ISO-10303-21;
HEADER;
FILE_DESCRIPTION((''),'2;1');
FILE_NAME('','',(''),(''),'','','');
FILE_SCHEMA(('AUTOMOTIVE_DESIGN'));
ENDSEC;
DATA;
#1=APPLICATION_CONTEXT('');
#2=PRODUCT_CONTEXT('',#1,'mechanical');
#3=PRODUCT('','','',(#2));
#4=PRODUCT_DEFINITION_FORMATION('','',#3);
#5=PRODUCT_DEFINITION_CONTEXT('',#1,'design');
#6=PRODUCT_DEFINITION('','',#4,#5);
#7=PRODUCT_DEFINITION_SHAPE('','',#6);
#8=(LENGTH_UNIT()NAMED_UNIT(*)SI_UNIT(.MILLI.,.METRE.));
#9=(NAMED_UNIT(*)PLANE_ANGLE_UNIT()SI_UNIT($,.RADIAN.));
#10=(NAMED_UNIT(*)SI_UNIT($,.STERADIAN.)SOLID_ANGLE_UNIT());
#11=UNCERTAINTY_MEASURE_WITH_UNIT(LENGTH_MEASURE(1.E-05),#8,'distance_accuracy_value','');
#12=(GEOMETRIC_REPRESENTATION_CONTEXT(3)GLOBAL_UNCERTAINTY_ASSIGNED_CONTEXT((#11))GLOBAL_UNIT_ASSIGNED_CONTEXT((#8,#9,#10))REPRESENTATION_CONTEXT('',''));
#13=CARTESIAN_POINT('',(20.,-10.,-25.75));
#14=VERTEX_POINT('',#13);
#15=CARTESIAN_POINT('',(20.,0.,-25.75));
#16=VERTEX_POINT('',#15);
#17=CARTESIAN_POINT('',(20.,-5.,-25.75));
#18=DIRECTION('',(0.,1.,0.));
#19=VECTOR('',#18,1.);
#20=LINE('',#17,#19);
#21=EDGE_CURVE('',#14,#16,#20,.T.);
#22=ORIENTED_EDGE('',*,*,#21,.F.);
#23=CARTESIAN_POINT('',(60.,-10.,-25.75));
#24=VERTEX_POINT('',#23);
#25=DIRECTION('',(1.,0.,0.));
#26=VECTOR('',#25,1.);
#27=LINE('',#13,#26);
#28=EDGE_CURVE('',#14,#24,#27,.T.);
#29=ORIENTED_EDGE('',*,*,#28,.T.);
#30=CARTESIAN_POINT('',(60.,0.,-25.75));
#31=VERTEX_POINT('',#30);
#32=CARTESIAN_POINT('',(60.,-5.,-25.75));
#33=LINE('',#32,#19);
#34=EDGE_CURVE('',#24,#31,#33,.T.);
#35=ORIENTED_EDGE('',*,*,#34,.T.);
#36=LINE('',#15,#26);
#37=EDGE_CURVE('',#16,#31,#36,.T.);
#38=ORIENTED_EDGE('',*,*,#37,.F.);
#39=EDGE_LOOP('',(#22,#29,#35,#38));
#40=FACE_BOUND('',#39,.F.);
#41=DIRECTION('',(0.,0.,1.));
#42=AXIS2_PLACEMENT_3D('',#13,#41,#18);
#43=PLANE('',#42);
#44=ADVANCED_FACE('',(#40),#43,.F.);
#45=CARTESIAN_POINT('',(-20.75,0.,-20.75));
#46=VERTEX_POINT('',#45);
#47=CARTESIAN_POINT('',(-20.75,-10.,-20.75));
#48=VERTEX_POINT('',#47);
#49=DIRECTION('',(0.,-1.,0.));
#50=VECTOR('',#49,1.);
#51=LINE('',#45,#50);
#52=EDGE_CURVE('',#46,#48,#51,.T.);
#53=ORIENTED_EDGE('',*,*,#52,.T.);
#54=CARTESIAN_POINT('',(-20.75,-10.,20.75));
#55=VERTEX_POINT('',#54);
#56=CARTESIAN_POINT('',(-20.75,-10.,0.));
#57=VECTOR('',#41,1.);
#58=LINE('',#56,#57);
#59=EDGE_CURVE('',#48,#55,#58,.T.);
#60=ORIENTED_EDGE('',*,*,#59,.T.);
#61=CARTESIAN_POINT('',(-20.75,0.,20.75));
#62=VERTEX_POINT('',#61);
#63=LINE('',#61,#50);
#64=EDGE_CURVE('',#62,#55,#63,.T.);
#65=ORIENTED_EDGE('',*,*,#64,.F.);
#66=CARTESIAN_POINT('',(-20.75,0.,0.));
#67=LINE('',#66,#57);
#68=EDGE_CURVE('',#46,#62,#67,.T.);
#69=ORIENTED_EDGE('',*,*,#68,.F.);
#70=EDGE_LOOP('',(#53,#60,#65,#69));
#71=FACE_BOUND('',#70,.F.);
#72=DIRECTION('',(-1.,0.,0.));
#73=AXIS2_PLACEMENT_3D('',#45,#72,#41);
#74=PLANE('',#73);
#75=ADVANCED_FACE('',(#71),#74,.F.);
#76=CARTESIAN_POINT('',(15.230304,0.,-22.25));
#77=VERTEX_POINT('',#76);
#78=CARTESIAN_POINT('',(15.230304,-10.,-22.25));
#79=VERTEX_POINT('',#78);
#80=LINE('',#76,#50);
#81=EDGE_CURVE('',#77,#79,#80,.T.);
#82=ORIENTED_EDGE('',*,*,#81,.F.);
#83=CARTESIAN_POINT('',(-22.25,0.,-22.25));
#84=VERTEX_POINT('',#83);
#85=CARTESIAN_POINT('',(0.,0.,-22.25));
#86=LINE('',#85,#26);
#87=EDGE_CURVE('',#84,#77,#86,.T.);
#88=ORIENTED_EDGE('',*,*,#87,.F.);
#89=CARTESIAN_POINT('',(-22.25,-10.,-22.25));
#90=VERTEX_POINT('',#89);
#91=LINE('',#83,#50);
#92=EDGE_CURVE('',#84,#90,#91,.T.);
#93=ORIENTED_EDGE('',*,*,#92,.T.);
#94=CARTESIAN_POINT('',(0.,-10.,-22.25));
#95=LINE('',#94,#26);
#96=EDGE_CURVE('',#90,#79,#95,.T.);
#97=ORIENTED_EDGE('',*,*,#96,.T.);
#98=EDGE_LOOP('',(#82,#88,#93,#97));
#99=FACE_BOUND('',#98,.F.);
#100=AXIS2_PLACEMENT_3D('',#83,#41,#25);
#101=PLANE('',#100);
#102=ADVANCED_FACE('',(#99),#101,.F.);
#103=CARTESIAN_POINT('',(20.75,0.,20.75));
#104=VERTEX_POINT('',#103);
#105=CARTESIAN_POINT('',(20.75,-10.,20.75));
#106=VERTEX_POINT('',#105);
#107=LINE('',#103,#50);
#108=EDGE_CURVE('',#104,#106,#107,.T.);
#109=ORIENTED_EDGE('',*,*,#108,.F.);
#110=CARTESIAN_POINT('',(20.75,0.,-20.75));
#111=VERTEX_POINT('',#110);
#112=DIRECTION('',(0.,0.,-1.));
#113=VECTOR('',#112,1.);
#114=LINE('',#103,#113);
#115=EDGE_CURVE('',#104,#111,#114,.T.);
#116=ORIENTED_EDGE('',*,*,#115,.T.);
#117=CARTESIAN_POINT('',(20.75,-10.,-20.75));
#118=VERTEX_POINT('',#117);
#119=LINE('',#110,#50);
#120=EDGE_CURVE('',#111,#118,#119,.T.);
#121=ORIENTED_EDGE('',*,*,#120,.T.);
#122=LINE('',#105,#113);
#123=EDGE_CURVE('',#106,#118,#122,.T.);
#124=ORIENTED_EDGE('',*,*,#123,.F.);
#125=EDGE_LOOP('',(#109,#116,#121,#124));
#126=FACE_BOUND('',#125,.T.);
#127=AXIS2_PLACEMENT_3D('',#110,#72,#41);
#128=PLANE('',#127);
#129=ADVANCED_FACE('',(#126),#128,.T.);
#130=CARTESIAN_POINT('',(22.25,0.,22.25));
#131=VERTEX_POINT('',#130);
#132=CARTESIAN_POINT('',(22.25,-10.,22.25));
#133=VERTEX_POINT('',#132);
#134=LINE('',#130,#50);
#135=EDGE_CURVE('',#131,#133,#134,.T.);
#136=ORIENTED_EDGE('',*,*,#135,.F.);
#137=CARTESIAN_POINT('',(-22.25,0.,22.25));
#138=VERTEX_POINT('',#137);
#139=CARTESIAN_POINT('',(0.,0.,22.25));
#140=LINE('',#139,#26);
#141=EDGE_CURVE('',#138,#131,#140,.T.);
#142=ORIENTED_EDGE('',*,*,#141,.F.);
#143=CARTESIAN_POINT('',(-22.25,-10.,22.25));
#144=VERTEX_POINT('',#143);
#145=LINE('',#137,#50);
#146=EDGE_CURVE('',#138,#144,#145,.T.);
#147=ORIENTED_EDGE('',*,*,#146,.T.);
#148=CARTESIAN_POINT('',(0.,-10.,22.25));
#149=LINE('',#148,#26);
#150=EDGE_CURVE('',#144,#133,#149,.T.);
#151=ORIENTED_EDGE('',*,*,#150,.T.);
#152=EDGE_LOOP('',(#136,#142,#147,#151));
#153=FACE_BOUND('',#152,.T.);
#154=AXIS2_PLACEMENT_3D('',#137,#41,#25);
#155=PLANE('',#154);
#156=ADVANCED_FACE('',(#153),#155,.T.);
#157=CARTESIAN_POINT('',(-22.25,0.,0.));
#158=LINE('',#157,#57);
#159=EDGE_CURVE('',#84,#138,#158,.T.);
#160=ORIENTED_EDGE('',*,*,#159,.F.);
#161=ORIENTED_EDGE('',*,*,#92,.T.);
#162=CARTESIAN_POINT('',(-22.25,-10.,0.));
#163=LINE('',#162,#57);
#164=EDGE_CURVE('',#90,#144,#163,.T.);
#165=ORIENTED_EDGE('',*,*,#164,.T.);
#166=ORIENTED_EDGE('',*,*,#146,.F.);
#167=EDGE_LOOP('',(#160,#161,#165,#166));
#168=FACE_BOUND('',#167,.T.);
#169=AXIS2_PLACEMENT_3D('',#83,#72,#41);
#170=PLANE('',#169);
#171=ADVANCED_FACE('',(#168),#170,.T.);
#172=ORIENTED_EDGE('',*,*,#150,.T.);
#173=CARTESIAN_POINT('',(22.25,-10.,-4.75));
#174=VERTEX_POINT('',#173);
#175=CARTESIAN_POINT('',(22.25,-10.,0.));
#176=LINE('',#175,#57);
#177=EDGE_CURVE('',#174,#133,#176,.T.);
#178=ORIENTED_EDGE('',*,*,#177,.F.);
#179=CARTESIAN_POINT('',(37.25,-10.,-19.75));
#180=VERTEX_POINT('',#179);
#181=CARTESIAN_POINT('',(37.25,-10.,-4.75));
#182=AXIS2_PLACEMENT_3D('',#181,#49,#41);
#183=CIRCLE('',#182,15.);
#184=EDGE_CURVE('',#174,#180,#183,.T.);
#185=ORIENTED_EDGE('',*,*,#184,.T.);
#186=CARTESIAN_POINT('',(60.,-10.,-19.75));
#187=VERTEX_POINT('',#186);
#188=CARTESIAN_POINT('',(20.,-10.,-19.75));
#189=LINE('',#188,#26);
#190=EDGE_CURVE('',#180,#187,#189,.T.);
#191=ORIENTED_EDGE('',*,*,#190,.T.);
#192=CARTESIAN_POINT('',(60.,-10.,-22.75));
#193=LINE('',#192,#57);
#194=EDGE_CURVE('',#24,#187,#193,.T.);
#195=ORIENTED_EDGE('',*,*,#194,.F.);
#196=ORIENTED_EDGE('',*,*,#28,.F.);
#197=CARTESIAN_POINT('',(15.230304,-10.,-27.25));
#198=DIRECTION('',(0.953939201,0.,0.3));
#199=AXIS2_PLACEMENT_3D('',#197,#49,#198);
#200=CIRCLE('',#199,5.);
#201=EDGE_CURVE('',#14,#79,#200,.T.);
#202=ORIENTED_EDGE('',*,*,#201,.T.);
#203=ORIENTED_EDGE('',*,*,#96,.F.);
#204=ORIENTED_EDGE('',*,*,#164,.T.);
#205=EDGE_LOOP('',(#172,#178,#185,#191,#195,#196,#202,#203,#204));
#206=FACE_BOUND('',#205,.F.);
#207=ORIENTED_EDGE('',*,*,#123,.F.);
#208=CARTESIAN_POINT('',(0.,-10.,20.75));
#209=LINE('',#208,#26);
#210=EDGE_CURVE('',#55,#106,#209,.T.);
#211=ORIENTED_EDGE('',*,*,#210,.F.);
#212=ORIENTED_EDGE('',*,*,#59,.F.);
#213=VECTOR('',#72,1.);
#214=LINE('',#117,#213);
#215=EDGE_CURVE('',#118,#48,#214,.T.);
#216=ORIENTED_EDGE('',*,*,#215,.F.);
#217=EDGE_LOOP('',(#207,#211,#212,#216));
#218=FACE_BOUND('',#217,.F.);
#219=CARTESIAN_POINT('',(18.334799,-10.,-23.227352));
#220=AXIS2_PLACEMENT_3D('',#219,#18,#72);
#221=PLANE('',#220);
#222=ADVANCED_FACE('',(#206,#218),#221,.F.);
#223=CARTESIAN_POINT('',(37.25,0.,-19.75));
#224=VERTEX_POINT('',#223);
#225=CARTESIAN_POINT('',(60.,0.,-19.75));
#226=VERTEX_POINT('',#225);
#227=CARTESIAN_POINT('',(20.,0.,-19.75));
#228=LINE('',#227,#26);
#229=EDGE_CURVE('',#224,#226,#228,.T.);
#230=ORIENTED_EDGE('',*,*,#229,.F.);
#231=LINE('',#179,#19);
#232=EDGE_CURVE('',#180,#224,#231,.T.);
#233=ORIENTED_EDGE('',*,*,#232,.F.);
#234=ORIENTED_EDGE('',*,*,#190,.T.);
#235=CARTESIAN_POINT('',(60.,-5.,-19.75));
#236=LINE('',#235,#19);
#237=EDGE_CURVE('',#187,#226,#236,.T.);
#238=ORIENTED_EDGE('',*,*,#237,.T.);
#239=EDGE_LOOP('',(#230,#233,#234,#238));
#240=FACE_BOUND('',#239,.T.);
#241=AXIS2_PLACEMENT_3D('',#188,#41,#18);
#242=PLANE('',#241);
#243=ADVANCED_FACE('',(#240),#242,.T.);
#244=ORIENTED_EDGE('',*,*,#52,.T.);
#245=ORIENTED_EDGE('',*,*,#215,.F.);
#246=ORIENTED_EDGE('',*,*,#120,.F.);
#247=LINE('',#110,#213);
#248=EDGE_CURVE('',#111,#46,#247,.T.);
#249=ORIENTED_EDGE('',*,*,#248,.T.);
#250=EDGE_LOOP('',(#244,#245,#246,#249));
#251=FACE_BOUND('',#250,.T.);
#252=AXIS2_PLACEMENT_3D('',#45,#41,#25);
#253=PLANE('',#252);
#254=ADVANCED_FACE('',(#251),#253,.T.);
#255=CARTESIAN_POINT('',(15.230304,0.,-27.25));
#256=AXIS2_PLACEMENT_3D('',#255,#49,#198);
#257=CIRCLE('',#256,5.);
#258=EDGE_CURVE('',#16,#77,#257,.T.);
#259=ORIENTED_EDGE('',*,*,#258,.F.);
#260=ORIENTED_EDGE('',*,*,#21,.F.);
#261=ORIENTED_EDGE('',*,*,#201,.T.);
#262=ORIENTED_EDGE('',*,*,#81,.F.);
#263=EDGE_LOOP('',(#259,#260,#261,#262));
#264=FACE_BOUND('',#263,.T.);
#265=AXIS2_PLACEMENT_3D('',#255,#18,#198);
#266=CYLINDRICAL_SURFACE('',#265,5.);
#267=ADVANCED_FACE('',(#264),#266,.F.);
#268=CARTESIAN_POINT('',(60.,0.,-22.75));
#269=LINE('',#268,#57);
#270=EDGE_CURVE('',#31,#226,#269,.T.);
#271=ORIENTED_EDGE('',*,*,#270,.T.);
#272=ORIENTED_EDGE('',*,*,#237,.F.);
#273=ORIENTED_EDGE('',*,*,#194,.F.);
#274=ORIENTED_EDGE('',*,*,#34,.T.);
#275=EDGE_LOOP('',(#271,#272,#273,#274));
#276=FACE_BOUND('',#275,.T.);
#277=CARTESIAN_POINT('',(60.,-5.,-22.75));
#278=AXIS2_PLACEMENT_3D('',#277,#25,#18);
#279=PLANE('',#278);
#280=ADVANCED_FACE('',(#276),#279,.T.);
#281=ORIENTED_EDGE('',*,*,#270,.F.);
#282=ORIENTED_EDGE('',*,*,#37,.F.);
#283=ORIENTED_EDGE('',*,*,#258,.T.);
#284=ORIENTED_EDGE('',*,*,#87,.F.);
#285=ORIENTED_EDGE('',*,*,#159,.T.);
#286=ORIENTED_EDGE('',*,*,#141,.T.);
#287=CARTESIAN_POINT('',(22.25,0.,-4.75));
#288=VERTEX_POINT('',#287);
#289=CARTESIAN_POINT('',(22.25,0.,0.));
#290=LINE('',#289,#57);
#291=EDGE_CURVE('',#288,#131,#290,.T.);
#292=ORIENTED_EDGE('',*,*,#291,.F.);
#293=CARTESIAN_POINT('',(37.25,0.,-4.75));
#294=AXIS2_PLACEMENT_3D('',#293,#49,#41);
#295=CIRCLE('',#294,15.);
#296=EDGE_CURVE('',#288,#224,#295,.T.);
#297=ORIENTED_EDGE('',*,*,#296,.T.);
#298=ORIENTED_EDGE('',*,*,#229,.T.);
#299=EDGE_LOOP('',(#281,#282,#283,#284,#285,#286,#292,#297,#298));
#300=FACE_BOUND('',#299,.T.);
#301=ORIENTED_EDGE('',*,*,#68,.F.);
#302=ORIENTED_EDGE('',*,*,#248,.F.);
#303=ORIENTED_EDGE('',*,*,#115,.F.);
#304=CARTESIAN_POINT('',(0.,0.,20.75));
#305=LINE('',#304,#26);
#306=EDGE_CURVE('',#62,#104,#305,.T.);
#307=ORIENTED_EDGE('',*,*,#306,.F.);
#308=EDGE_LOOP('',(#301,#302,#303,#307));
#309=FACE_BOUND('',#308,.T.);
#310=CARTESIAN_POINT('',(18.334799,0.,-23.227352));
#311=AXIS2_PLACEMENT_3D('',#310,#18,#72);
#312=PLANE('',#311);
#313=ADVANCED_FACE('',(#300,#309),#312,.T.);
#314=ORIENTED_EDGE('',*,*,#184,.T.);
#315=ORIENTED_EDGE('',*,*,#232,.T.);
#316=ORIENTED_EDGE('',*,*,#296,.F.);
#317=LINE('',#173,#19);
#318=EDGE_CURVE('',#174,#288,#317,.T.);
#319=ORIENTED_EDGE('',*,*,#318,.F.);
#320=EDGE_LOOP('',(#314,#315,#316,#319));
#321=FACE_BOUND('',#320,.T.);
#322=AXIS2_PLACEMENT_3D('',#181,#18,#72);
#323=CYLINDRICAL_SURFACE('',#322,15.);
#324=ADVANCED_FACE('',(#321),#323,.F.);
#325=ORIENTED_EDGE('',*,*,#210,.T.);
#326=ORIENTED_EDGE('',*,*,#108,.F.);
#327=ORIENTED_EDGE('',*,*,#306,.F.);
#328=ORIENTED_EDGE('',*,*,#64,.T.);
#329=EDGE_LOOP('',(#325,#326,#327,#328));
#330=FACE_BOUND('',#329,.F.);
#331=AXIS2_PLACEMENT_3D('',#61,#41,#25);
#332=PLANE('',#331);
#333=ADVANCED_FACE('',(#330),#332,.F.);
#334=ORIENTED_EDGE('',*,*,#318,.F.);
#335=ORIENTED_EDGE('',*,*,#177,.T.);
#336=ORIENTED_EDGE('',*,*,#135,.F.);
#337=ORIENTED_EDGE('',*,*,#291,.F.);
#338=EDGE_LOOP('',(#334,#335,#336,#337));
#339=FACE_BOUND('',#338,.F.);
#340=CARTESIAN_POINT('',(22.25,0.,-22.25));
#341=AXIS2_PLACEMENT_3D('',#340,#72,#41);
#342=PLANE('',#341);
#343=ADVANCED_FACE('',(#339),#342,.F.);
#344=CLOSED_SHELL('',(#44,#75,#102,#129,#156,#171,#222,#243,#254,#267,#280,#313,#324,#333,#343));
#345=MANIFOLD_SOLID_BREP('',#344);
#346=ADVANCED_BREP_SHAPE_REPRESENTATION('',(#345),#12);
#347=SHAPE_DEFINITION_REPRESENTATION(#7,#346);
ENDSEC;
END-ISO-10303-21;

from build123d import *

# Parameters (mm, degrees)
F0_W        = 44.5
F0_H        = 44.5
F1_DEPTH    = 10
F2_W        = 41.5
F2_H        = 41.5
F3_DEPTH    = 10
F5_START    = 20
F4_W        = 10
F4_H        = 6
F5_DEPTH    = 40
F6_W        = 18.9917886164
F6_H        = 12.0773017406
F7_DEPTH    = 25
F8_R        = 15
F9_T1_DEPTH = 10


# Not quite as in the source:
# - a fillet or chamfer that OpenCascade refuses, or shapes differently, is made with other operations: its cross-section is extruded or revolved along the edge and cut away or added


with BuildPart() as f1:
    # F0 (on Front) → F1 (new body)
    with BuildSketch(Plane.XZ):
        Rectangle(F0_W, F0_H)
    extrude(amount=F1_DEPTH)

    # F2 (on Front) → F3 (cut)
    with BuildSketch(Plane.XZ):
        Rectangle(F2_W, F2_H)
    extrude(amount=F3_DEPTH, mode=Mode.SUBTRACT)

    # F4 (on Right) → F5 (join)
    with BuildSketch(Plane.YZ.offset(F5_START)):
        with Locations((-5, -22.75)):
            Rectangle(F4_W, F4_H)
    extrude(amount=F5_DEPTH)

    # F6 (on Front) → F7 (cut)
    with BuildSketch(Plane.XZ):
        with Locations((11.2541056918, -14.7113491297)):
            Rectangle(F6_W, F6_H)
    extrude(amount=F7_DEPTH, mode=Mode.SUBTRACT)

    # F8
    f8_edges = [f1.edges().sort_by_distance(p)[0] for p in [
        (22.25, -5, -19.75),
    ]]
    fillet(f8_edges, radius=F8_R)

    # F9: fillet of radius 5 on 1 edges, made by hand

    # F9_s2 → F9_t1 (join)
    with BuildSketch(Plane.XZ):
        with BuildLine():
            ThreePointArc((20, -25.75), (18.1883438845, -23.2188711259), (15.2303039929, -22.25))
            Line((15.2303039929, -22.25), (20, -22.25))
            Line((20, -22.25), (20, -25.75))
        make_face()
    extrude(amount=F9_T1_DEPTH)


solid = f1.part
